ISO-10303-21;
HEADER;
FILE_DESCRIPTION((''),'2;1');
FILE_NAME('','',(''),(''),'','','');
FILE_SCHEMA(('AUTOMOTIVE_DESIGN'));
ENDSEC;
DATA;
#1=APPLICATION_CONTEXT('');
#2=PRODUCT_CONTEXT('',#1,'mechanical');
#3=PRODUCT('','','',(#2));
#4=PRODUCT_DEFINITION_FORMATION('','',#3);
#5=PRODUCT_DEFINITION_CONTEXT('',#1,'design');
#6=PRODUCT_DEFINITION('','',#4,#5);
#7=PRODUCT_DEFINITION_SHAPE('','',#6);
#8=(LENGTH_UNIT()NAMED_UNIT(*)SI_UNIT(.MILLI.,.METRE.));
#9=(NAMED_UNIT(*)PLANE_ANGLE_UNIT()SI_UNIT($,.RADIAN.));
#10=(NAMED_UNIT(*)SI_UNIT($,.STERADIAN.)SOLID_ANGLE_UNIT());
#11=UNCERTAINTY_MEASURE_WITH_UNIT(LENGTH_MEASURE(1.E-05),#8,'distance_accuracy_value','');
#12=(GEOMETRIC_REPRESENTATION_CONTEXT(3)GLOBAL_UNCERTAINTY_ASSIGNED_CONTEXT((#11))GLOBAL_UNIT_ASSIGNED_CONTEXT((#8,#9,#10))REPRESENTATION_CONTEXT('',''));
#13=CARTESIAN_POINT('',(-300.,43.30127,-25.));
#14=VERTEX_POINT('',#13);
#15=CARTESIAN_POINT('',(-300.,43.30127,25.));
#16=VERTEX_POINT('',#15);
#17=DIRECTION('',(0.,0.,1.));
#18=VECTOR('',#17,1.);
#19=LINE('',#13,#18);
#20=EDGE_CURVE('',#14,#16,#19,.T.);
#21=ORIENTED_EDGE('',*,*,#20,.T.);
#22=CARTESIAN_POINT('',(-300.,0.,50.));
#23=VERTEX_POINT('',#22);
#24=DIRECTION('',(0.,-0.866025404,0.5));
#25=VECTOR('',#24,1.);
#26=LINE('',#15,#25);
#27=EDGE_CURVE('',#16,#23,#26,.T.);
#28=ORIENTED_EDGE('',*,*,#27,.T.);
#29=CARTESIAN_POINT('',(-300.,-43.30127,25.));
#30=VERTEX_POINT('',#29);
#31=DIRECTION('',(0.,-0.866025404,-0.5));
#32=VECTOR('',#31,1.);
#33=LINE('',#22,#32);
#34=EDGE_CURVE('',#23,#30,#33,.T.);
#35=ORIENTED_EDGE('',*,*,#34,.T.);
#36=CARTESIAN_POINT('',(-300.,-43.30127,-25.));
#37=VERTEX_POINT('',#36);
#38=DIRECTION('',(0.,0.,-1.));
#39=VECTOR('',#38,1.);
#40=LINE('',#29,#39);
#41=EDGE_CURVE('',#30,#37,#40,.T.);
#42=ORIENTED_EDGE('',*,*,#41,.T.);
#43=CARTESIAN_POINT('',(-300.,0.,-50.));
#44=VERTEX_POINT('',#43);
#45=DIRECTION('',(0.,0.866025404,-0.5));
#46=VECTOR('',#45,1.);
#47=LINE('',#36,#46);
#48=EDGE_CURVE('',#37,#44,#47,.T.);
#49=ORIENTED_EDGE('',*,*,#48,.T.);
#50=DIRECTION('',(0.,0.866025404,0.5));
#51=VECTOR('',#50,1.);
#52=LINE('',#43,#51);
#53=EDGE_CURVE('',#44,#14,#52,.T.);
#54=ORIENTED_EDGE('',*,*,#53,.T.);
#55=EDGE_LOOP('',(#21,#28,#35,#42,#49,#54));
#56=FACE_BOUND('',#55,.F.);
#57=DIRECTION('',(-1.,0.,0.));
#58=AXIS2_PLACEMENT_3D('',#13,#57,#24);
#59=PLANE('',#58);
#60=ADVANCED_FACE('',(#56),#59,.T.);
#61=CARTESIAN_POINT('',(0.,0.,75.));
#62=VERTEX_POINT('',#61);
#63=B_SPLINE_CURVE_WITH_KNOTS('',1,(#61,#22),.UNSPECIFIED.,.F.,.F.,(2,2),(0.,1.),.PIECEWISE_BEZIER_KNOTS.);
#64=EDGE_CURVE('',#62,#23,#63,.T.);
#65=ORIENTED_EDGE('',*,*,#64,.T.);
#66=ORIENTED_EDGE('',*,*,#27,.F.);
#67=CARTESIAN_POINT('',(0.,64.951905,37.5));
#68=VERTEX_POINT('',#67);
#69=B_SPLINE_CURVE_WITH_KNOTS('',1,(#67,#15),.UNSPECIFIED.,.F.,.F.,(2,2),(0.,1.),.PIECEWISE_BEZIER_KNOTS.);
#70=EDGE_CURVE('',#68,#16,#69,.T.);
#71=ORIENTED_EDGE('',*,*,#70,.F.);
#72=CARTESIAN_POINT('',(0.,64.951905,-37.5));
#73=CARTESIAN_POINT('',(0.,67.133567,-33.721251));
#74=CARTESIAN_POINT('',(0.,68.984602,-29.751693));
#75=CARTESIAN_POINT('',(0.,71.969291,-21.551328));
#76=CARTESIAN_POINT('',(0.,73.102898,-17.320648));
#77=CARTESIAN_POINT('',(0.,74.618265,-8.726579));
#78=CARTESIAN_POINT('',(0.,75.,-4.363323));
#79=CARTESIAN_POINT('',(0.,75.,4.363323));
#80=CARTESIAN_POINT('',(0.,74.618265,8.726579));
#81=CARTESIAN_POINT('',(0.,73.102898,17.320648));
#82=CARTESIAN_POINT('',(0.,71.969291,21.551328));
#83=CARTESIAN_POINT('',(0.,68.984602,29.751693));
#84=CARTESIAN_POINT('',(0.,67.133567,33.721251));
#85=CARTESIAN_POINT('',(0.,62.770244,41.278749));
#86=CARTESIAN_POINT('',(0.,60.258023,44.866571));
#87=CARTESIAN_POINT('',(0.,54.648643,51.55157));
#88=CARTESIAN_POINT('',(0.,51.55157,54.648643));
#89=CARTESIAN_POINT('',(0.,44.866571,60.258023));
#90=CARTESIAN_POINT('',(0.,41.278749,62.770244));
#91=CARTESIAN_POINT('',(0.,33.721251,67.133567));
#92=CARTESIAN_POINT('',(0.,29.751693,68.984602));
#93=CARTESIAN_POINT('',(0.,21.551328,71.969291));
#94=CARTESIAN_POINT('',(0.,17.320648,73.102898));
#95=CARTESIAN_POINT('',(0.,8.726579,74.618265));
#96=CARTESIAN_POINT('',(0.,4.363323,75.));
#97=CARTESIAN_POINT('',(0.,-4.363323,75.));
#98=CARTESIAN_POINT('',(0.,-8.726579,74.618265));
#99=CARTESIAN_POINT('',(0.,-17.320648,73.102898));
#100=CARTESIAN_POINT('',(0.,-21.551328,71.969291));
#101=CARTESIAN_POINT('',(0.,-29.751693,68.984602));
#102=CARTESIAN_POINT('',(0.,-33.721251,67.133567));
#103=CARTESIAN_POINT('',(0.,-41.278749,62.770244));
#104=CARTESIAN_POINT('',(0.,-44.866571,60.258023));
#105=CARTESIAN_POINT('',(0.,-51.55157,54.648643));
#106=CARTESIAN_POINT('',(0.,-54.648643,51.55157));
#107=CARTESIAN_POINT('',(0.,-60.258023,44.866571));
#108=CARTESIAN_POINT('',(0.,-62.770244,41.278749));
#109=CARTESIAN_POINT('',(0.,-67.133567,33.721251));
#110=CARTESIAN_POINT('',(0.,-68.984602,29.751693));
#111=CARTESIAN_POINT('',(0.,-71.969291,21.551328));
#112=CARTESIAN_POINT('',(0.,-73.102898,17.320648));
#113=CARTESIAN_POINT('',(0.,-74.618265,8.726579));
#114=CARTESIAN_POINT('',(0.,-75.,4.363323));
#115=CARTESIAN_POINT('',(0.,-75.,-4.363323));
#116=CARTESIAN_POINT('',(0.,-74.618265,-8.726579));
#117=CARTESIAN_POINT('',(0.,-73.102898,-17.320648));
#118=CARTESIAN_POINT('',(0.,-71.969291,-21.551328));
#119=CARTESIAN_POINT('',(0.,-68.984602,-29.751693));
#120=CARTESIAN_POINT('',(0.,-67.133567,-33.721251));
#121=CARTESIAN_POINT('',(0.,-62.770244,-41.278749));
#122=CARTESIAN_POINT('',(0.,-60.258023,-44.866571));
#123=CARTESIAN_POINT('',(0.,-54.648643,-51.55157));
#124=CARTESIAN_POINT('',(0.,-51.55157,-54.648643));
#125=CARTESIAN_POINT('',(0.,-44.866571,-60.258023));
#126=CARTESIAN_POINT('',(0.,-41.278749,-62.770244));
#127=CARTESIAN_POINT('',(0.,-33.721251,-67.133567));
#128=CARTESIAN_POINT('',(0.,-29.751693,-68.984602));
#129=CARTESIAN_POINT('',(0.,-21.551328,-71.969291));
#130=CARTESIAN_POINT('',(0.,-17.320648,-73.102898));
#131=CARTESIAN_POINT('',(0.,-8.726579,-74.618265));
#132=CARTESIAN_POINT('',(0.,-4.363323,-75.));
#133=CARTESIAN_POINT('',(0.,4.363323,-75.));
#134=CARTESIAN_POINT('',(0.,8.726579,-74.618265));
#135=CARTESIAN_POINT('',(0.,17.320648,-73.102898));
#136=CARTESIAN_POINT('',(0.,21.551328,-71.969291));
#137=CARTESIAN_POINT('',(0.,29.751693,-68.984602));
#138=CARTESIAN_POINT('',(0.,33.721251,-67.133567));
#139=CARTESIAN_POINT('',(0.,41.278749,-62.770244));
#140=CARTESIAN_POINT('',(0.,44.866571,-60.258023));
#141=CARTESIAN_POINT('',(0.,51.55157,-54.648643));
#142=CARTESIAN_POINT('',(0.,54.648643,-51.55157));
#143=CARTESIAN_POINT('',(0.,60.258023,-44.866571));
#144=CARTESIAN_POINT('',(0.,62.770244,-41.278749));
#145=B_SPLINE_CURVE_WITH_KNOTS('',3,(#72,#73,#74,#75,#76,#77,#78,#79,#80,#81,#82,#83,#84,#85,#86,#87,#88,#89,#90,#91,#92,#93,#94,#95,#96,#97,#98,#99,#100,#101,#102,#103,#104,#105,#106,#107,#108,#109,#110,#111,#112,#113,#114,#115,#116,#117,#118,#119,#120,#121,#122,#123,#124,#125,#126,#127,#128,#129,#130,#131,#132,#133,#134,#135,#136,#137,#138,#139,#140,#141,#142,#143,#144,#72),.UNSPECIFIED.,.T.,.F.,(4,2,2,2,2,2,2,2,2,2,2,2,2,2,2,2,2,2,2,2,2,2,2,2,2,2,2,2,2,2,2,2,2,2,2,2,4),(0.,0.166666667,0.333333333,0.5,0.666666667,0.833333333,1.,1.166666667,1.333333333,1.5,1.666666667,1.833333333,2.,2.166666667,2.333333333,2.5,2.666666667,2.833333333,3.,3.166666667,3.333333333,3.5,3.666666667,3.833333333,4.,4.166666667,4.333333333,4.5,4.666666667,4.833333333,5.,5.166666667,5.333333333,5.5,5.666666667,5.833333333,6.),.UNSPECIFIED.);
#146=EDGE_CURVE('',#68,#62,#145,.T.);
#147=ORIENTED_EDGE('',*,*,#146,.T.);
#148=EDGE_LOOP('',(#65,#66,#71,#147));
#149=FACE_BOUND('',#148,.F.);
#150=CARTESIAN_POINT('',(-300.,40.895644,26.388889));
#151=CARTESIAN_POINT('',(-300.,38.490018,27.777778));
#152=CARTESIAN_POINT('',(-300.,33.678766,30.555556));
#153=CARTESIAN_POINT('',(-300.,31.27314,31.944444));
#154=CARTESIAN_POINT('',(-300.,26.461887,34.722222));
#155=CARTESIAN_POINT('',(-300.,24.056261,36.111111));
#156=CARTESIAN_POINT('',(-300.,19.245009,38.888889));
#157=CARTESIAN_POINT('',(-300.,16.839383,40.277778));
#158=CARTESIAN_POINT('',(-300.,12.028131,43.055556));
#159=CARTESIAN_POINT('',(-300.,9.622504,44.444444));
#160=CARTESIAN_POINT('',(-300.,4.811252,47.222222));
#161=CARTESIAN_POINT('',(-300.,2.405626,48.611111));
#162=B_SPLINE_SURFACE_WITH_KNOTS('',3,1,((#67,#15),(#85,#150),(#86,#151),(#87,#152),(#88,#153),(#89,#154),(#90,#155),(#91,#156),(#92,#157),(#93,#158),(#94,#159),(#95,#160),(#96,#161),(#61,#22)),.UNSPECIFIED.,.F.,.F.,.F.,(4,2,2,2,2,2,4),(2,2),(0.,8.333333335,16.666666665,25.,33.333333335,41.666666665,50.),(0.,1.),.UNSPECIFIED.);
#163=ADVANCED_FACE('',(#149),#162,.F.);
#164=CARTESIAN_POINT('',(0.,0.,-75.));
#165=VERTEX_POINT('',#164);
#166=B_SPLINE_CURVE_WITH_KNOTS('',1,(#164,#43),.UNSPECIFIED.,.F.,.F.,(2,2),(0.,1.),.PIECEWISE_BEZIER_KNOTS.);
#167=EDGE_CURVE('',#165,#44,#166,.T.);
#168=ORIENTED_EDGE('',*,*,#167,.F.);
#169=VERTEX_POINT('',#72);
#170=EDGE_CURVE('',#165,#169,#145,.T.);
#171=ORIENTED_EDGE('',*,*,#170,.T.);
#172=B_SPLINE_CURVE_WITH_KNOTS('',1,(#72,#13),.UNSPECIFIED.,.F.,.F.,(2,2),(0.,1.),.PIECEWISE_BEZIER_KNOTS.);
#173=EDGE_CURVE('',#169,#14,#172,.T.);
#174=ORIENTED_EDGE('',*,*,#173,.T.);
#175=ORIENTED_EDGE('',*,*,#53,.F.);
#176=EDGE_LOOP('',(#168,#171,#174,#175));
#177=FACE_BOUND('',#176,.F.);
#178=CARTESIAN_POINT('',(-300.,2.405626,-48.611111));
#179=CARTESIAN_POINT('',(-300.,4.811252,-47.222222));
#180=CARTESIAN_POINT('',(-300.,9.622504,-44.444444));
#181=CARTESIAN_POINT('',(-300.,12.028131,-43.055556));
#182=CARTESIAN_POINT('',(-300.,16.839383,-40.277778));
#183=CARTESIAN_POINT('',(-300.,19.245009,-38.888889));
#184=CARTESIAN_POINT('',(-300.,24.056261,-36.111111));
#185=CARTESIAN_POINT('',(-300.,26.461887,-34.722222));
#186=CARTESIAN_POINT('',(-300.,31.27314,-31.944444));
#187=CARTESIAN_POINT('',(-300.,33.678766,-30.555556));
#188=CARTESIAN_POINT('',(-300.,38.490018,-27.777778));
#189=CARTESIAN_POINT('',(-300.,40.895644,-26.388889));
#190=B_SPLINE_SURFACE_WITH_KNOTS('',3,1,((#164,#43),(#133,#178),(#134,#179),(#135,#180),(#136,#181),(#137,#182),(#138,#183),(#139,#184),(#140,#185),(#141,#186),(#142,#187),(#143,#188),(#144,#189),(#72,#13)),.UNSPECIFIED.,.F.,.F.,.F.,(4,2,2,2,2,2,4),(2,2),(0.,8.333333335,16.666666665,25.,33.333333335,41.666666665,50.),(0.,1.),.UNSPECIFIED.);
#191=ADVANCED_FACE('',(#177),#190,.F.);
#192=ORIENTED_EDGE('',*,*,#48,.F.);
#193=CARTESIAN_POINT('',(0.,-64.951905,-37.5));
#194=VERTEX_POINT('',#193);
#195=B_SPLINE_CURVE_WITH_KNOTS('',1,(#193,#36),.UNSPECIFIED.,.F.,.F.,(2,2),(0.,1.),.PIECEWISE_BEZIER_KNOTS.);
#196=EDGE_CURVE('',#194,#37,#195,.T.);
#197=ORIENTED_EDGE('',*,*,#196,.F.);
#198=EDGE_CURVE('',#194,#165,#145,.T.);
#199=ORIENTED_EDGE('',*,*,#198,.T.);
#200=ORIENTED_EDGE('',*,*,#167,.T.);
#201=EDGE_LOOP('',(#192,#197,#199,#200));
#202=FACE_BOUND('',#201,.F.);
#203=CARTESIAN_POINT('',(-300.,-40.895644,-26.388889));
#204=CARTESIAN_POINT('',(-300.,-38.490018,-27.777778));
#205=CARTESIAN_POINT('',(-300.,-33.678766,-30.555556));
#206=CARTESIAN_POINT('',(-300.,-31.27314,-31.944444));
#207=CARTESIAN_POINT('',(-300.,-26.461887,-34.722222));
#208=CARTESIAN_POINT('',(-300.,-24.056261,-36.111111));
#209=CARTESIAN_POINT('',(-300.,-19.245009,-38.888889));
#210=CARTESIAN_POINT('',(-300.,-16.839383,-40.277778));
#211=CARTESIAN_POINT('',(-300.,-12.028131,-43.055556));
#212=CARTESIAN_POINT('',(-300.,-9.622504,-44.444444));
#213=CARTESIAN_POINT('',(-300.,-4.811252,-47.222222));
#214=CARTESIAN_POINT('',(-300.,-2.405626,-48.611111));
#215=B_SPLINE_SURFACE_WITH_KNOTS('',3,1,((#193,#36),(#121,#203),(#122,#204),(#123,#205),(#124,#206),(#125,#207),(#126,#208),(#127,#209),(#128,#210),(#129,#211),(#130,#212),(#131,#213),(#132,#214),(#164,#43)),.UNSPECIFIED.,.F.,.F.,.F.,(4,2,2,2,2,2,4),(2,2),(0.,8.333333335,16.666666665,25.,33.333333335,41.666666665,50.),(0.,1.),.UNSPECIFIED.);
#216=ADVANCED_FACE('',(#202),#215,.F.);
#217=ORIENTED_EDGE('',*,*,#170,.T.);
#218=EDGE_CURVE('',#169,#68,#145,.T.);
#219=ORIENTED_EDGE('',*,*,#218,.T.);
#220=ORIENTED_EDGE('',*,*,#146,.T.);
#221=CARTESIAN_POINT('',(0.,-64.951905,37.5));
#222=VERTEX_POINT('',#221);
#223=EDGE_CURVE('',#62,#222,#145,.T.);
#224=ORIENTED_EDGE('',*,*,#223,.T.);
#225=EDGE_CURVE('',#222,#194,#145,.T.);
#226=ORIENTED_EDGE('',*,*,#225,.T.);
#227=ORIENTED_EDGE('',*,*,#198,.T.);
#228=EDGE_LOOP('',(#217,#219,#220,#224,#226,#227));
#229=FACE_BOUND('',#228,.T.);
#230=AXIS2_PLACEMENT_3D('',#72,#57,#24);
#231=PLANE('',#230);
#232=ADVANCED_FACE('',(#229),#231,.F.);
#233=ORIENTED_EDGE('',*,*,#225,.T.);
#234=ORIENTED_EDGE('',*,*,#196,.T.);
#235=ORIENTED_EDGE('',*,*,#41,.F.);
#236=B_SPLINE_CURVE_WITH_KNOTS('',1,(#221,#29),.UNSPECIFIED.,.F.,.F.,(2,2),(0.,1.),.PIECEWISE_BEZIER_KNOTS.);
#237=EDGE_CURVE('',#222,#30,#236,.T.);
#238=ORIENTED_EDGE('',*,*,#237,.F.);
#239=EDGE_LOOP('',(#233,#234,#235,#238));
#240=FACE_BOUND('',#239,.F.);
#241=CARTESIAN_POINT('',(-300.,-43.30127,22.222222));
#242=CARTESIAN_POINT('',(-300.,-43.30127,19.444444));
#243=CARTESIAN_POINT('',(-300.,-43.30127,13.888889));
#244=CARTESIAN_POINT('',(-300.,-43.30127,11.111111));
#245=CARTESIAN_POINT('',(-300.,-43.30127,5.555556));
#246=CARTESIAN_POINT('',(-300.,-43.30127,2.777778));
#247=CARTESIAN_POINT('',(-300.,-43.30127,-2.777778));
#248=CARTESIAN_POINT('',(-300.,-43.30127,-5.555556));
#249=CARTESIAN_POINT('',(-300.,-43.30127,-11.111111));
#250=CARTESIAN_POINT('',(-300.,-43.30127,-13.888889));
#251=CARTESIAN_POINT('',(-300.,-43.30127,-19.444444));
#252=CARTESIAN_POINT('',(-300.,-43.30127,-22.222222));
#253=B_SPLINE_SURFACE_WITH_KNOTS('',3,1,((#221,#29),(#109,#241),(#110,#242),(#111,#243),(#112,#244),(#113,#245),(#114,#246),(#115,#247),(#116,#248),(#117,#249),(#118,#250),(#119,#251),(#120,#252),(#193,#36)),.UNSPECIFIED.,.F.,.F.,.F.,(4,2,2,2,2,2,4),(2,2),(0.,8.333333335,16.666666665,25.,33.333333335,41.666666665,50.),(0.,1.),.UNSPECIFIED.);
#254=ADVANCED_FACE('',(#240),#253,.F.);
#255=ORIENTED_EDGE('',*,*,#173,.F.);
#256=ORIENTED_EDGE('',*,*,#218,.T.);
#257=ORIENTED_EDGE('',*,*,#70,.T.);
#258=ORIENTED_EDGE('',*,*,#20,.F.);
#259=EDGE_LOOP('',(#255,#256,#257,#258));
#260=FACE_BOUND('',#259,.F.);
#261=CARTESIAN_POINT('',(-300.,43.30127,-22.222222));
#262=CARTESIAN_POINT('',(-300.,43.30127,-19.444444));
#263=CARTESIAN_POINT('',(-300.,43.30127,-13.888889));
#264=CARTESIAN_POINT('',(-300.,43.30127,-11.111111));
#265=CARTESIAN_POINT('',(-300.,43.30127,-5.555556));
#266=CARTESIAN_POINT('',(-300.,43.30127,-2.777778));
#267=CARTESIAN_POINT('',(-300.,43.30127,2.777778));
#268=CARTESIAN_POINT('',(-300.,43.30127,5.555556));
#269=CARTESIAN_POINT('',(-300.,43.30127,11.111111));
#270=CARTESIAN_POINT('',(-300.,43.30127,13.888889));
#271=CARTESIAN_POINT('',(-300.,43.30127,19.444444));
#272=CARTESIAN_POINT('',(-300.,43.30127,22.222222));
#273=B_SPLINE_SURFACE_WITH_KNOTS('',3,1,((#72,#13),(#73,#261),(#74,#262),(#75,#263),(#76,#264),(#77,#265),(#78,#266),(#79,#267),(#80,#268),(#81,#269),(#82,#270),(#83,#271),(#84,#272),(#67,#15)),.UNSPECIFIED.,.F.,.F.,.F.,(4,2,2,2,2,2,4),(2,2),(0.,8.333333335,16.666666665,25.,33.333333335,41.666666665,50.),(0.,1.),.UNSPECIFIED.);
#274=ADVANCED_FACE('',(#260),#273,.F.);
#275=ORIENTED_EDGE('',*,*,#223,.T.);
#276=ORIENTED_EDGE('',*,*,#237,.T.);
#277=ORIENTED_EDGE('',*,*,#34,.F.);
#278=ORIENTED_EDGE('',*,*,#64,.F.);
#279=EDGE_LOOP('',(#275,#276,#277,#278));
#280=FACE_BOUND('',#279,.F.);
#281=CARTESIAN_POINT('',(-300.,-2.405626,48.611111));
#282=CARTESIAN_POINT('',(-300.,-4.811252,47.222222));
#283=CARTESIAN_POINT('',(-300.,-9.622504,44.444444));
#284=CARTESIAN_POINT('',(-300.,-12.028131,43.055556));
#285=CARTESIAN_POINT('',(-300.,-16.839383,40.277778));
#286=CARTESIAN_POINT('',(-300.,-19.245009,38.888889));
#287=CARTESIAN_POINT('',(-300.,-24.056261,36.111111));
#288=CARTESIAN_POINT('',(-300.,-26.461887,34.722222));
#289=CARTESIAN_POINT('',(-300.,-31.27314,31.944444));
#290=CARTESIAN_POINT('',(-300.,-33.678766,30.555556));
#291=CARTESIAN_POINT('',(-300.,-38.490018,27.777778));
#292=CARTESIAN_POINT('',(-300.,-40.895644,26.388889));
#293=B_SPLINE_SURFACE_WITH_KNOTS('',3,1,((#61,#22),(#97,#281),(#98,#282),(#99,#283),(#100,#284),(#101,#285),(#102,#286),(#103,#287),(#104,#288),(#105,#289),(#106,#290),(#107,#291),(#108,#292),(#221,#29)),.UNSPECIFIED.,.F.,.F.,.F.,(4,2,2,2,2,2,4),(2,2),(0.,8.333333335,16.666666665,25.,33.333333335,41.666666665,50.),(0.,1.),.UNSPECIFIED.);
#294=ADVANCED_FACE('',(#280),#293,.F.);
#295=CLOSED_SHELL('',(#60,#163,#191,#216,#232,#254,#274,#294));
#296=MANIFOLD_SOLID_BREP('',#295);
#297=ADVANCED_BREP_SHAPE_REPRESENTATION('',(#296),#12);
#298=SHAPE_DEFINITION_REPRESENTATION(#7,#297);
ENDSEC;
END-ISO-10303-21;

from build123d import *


# Not quite as in the source:
# - the arcs of a loft's sections are written as splines that run evenly, so that the points pair up as in the source's solid


with BuildPart() as f3:
    # F0 (on Right) → F3 section 0
    with BuildSketch(Plane.YZ):
        with BuildLine():
            add(Edge.make_bspline(
                [(64.9519052838, 37.5), (62.7702437188, 41.2787486755), (60.2580232789, 44.8665712892), (54.6486431889, 51.5515701637), (51.5515701637, 54.6486431889), (44.8665712892, 60.2580232789), (41.2787486755, 62.7702437188), (33.7212513245, 67.1335668488), (29.7516932968, 68.9846021566), (21.5513282021, 71.9692909612), (17.3206477723, 73.1028983658), (8.7265788777, 74.618264586), (4.36332313, 75), (0, 75)],
                knots=[0, 0, 0, 0, 0.1666666667, 0.1666666667, 0.3333333333, 0.3333333333, 0.5, 0.5, 0.6666666667, 0.6666666667, 0.8333333333, 0.8333333333, 1, 1, 1, 1], degree=3))
            add(Edge.make_bspline(
                [(0, 75), (-4.36332313, 75), (-8.7265788777, 74.618264586), (-17.3206477723, 73.1028983658), (-21.5513282021, 71.9692909612), (-29.7516932968, 68.9846021566), (-33.7212513245, 67.1335668488), (-41.2787486755, 62.7702437188), (-44.8665712892, 60.2580232789), (-51.5515701637, 54.6486431889), (-54.6486431889, 51.5515701637), (-60.2580232789, 44.8665712892), (-62.7702437188, 41.2787486755), (-64.9519052838, 37.5)],
                knots=[0, 0, 0, 0, 0.1666666667, 0.1666666667, 0.3333333333, 0.3333333333, 0.5, 0.5, 0.6666666667, 0.6666666667, 0.8333333333, 0.8333333333, 1, 1, 1, 1], degree=3))
            add(Edge.make_bspline(
                [(-64.9519052838, 37.5), (-67.1335668488, 33.7212513245), (-68.9846021566, 29.7516932968), (-71.9692909612, 21.5513282021), (-73.1028983658, 17.3206477723), (-74.618264586, 8.7265788777), (-75, 4.36332313), (-75, -4.36332313), (-74.618264586, -8.7265788777), (-73.1028983658, -17.3206477723), (-71.9692909612, -21.5513282021), (-68.9846021566, -29.7516932968), (-67.1335668488, -33.7212513245), (-64.9519052838, -37.5)],
                knots=[0, 0, 0, 0, 0.1666666667, 0.1666666667, 0.3333333333, 0.3333333333, 0.5, 0.5, 0.6666666667, 0.6666666667, 0.8333333333, 0.8333333333, 1, 1, 1, 1], degree=3))
            add(Edge.make_bspline(
                [(-64.9519052838, -37.5), (-62.7702437188, -41.2787486755), (-60.2580232789, -44.8665712892), (-54.6486431889, -51.5515701637), (-51.5515701637, -54.6486431889), (-44.8665712892, -60.2580232789), (-41.2787486755, -62.7702437188), (-33.7212513245, -67.1335668488), (-29.7516932968, -68.9846021566), (-21.5513282021, -71.9692909612), (-17.3206477723, -73.1028983658), (-8.7265788777, -74.618264586), (-4.36332313, -75), (0, -75)],
                knots=[0, 0, 0, 0, 0.1666666667, 0.1666666667, 0.3333333333, 0.3333333333, 0.5, 0.5, 0.6666666667, 0.6666666667, 0.8333333333, 0.8333333333, 1, 1, 1, 1], degree=3))
            add(Edge.make_bspline(
                [(0, -75), (4.36332313, -75), (8.7265788777, -74.618264586), (17.3206477723, -73.1028983658), (21.5513282021, -71.9692909612), (29.7516932968, -68.9846021566), (33.7212513245, -67.1335668488), (41.2787486755, -62.7702437188), (44.8665712892, -60.2580232789), (51.5515701637, -54.6486431889), (54.6486431889, -51.5515701637), (60.2580232789, -44.8665712892), (62.7702437188, -41.2787486755), (64.9519052838, -37.5)],
                knots=[0, 0, 0, 0, 0.1666666667, 0.1666666667, 0.3333333333, 0.3333333333, 0.5, 0.5, 0.6666666667, 0.6666666667, 0.8333333333, 0.8333333333, 1, 1, 1, 1], degree=3))
            add(Edge.make_bspline(
                [(64.9519052838, -37.5), (67.1335668488, -33.7212513245), (68.9846021566, -29.7516932968), (71.9692909612, -21.5513282021), (73.1028983658, -17.3206477723), (74.618264586, -8.7265788777), (75, -4.36332313), (75, 4.36332313), (74.618264586, 8.7265788777), (73.1028983658, 17.3206477723), (71.9692909612, 21.5513282021), (68.9846021566, 29.7516932968), (67.1335668488, 33.7212513245), (64.9519052838, 37.5)],
                knots=[0, 0, 0, 0, 0.1666666667, 0.1666666667, 0.3333333333, 0.3333333333, 0.5, 0.5, 0.6666666667, 0.6666666667, 0.8333333333, 0.8333333333, 1, 1, 1, 1], degree=3))
        make_face()
    # F2 (on offset) → F3 section 1
    with BuildSketch(Plane.YZ.offset(-300)):
        Polygon((43.3012701892, 25), (0, 50), (-43.3012701892, 25), (-43.3012701892, -25), (0, -50), (43.3012701892, -25), align=None)
    loft(ruled=True)


solid = f3.part
